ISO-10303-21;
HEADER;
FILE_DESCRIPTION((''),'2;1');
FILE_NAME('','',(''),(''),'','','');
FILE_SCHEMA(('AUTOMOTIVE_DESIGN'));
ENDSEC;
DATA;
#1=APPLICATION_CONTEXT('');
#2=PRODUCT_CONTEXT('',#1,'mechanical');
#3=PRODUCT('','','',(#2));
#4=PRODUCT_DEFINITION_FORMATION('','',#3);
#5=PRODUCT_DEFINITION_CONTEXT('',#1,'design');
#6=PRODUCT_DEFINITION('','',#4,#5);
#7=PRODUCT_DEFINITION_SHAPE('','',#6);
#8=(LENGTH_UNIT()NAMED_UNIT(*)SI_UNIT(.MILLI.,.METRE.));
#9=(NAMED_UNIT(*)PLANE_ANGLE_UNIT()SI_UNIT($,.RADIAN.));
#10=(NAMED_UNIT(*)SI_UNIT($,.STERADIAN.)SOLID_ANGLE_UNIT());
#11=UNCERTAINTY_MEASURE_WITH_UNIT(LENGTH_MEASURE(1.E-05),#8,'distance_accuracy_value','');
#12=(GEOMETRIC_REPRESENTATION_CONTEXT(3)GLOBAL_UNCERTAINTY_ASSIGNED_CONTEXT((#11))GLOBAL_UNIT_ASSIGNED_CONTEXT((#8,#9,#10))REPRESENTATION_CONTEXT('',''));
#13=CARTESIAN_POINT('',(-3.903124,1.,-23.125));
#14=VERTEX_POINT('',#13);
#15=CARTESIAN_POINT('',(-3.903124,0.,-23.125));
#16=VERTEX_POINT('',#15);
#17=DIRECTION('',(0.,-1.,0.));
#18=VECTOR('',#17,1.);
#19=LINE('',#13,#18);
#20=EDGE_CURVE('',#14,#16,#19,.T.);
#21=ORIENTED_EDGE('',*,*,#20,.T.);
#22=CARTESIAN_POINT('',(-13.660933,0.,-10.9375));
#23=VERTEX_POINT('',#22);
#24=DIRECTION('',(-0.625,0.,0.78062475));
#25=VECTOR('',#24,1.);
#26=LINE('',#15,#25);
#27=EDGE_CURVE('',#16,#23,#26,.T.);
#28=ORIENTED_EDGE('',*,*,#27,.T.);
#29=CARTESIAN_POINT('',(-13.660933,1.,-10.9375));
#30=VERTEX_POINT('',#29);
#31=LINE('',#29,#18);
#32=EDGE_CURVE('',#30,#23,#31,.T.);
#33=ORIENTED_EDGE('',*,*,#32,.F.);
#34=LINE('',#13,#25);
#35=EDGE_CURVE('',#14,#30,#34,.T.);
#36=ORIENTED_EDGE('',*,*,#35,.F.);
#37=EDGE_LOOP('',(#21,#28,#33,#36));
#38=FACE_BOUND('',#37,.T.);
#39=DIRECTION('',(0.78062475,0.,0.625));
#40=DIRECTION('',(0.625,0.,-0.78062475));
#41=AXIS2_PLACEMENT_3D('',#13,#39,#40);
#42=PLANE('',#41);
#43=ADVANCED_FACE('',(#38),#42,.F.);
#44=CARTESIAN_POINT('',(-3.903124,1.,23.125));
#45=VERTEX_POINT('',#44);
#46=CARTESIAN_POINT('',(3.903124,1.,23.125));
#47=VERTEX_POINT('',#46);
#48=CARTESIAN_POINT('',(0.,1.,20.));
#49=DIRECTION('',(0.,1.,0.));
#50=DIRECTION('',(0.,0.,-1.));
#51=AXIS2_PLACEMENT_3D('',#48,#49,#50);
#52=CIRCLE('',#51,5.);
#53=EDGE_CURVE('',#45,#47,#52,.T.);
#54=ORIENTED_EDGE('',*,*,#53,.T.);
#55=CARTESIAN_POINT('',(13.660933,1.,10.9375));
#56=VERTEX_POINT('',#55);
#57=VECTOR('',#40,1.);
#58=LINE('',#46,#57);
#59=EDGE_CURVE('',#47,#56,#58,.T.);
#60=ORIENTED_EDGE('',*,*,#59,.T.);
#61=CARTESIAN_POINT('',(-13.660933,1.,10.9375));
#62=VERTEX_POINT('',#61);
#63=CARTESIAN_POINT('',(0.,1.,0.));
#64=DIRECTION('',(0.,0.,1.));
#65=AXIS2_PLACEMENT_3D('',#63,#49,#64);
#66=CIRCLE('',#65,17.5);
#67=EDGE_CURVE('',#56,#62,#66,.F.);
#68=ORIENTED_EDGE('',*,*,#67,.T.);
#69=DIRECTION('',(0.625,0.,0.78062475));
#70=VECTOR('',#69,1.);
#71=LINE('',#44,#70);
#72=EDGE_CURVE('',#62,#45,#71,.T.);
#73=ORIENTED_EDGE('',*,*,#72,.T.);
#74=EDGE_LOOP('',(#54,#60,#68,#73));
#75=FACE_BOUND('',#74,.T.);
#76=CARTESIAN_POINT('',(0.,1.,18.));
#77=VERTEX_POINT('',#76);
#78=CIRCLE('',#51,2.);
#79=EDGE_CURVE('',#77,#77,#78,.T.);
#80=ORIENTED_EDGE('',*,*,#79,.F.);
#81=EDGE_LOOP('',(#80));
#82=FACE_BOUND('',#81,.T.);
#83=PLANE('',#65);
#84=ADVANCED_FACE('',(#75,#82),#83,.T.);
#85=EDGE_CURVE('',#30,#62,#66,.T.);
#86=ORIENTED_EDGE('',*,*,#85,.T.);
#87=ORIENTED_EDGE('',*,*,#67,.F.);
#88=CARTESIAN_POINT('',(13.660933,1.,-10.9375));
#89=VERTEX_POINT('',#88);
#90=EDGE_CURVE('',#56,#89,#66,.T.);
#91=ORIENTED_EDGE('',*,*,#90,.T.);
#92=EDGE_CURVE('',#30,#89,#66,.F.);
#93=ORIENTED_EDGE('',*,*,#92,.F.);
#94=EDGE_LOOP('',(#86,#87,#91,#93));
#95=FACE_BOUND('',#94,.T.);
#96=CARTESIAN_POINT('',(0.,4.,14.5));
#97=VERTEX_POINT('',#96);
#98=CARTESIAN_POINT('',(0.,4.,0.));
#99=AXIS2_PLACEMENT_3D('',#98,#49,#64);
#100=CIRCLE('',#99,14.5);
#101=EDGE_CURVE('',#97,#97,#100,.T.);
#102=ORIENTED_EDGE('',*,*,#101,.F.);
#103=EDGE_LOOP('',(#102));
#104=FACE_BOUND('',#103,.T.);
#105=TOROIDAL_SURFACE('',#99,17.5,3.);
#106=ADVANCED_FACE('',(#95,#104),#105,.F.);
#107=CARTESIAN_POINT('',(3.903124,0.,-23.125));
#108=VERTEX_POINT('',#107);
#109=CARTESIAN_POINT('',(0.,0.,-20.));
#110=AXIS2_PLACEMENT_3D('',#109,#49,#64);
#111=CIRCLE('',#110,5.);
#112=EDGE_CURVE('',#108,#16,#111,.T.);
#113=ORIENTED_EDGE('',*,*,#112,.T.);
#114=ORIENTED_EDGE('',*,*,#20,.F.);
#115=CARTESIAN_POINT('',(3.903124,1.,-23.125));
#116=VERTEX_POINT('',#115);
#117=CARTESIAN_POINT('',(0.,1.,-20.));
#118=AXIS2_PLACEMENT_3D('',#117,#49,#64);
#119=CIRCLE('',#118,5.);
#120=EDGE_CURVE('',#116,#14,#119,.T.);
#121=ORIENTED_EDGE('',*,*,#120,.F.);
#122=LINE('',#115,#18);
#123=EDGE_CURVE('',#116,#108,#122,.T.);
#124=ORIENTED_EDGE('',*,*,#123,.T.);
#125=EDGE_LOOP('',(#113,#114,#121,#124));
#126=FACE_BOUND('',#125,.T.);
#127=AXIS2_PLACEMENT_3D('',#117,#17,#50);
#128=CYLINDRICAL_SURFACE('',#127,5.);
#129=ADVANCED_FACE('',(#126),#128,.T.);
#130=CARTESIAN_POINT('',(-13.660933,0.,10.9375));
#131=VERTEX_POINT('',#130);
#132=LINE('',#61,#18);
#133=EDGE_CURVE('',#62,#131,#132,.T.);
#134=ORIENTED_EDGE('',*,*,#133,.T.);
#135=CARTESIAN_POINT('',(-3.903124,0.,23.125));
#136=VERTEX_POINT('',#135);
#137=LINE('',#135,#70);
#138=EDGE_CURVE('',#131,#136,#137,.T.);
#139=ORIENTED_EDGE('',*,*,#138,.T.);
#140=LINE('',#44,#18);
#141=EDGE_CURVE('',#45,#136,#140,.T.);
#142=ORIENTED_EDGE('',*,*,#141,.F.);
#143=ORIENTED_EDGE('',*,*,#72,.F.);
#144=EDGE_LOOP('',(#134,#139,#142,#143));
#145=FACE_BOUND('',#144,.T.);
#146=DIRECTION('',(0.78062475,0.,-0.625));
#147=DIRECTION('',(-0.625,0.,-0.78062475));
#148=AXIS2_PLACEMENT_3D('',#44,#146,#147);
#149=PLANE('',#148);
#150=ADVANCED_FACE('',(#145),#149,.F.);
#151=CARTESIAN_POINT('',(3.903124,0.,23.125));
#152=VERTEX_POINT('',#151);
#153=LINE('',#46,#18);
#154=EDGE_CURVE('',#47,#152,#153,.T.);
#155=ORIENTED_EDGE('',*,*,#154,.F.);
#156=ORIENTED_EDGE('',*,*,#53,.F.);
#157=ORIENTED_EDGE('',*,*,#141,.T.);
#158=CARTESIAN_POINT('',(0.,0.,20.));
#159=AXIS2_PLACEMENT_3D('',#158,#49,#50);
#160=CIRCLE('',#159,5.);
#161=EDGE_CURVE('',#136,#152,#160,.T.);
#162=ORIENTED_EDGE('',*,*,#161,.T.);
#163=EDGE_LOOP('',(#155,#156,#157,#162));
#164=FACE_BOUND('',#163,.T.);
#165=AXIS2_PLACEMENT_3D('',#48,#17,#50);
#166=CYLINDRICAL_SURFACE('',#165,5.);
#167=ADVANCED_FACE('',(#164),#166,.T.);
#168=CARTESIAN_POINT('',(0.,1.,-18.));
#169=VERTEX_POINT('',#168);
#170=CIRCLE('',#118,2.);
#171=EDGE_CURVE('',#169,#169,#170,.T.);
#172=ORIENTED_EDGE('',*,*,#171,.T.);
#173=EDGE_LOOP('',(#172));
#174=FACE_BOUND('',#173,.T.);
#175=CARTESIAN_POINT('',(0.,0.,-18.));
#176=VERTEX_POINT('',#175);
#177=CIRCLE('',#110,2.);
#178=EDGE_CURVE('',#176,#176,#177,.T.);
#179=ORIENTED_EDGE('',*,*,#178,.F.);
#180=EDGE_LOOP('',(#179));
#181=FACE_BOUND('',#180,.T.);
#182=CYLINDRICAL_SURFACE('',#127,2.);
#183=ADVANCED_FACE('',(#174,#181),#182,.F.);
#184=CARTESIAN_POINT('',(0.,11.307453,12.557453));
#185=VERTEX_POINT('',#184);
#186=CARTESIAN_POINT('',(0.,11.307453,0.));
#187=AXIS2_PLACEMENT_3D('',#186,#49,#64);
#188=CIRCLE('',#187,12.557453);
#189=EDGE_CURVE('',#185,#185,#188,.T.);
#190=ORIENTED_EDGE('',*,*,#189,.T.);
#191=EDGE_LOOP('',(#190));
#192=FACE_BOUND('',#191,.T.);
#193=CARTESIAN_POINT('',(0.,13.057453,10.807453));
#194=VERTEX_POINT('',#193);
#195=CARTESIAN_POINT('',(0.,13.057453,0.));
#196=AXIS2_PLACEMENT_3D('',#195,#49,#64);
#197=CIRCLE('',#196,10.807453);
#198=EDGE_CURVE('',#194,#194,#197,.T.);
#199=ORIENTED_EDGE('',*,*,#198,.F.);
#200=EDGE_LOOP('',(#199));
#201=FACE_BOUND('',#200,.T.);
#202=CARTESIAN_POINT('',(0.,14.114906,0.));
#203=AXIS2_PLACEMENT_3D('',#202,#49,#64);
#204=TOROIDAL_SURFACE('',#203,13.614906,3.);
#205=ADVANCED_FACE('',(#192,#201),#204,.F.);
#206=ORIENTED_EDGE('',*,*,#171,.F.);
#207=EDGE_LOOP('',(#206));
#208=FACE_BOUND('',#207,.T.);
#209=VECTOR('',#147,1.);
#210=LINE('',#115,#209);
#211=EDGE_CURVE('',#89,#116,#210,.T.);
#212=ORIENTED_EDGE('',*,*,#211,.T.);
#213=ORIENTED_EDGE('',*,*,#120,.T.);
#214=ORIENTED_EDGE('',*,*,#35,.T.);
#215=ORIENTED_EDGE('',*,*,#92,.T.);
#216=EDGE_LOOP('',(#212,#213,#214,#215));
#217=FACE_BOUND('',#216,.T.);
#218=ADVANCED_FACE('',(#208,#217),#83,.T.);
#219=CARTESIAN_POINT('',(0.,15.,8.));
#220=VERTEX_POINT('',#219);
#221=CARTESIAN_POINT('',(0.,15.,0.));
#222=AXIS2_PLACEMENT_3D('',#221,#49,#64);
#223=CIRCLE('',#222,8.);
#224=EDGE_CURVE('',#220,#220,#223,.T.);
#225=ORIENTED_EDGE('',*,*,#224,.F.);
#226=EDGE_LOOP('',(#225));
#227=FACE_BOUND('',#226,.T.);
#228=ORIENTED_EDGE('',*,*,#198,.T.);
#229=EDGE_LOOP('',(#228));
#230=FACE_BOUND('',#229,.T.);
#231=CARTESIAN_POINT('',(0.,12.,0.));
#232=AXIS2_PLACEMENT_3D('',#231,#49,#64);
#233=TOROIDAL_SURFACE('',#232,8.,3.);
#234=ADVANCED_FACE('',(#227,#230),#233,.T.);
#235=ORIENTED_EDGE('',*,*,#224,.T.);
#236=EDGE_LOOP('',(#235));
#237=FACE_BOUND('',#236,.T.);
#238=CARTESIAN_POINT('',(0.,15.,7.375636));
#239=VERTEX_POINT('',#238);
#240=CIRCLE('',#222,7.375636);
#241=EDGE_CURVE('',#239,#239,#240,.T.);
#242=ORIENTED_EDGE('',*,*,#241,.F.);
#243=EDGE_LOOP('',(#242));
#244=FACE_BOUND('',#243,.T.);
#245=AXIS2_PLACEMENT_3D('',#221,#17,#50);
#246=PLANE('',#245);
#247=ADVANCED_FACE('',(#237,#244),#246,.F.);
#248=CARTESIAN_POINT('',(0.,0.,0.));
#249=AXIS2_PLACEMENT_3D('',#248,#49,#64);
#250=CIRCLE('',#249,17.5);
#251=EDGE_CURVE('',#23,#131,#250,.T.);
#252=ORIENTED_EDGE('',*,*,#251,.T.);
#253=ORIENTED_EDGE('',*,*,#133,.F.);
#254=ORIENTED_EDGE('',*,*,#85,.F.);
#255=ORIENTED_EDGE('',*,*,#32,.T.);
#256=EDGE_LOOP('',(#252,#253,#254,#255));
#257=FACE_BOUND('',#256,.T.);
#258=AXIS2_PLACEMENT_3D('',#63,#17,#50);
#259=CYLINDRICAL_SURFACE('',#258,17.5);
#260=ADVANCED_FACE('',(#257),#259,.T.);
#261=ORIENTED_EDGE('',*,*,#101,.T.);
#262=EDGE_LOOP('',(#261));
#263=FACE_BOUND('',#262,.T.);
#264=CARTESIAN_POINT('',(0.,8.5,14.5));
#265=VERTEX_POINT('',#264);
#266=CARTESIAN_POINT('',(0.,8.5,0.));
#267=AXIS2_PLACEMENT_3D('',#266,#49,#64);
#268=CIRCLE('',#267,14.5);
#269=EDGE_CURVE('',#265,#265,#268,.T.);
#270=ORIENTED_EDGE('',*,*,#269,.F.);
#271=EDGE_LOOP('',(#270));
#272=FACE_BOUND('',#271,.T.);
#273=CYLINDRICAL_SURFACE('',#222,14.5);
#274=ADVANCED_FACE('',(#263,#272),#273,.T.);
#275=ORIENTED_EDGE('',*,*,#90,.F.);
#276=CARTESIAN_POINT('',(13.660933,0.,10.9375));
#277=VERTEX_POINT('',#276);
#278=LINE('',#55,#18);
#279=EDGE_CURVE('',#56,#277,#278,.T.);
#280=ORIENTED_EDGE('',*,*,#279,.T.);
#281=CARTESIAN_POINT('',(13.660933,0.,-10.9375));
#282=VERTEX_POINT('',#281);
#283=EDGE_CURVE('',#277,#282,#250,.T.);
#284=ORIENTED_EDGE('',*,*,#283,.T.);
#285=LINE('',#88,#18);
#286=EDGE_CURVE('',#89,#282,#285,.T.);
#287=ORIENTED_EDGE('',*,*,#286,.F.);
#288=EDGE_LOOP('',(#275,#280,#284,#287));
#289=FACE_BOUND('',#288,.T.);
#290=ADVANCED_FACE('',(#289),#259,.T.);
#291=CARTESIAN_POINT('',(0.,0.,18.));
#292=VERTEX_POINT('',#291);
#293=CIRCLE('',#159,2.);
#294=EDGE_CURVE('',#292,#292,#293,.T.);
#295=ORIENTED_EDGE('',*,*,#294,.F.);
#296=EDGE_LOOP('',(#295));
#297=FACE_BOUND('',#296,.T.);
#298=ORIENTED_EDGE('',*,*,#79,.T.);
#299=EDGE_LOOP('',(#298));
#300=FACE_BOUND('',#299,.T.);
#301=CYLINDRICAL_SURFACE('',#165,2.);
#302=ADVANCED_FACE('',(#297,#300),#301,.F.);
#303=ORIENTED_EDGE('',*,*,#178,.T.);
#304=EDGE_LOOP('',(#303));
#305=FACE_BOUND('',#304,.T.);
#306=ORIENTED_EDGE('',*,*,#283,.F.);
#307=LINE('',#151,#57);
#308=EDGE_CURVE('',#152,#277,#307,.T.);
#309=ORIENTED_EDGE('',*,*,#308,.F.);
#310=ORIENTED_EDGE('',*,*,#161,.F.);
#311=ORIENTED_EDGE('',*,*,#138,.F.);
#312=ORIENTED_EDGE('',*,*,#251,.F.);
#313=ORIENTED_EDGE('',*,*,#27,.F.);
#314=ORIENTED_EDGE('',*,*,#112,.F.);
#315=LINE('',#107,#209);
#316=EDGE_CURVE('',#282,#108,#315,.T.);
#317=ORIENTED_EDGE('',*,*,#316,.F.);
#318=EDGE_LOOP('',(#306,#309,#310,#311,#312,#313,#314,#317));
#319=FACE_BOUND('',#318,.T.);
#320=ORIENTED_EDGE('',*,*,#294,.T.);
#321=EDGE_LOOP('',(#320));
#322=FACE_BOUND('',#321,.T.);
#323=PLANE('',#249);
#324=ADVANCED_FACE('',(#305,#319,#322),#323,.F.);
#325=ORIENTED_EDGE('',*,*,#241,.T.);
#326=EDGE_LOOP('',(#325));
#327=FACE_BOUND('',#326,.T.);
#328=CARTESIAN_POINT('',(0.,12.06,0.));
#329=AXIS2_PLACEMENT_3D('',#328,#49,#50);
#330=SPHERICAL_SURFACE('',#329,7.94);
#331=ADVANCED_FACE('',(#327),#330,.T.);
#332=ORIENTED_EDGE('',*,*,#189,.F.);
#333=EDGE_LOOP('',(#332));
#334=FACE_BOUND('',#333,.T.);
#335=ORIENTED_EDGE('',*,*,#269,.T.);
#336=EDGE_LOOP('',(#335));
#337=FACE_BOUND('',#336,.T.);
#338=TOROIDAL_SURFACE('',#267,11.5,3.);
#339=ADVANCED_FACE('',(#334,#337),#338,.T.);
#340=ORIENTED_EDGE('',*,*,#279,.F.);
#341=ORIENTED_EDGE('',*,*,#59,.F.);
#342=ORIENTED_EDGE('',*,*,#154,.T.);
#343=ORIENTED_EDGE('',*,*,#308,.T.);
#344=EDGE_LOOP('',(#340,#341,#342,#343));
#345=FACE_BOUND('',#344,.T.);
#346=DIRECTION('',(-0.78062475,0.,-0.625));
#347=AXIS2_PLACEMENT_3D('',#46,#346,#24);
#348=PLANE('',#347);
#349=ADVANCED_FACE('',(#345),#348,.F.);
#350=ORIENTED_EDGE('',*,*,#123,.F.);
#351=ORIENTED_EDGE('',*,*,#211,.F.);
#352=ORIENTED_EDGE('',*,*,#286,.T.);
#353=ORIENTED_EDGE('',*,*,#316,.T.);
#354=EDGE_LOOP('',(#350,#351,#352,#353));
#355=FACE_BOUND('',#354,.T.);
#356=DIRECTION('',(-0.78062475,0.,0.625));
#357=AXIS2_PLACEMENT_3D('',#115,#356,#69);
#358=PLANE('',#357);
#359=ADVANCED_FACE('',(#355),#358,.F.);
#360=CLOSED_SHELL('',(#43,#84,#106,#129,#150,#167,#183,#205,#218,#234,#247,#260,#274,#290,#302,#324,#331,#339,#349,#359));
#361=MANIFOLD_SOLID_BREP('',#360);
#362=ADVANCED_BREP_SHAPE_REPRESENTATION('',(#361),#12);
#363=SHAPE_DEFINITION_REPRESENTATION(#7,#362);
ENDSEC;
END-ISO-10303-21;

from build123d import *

# Parameters (mm, degrees)
SKETCH_1_R      = 2
EXTRUDE_1_DEPTH = 1
FILLET_1_R      = 3


with BuildPart() as part:
    # 草图1 → 凸台-拉伸1 (new body)
    with BuildSketch(Plane(origin=(0, 0, 0), x_dir=(1, 0, 0), z_dir=(0, 1, 0))):
        with BuildLine():
            Line((-3.903123749, 23.125), (-13.660933121, 10.9375))
            ThreePointArc((-13.660933121, 10.9375), (-17.5, 0), (-13.660933121, -10.9375))
            Line((-13.660933121, -10.9375), (-3.903123749, -23.125))
            ThreePointArc((-3.903123749, -23.125), (0, -25), (3.903123749, -23.125))
            Line((3.903123749, -23.125), (13.660933121, -10.9375))
            ThreePointArc((13.660933121, -10.9375), (17.5, 0), (13.660933121, 10.9375))
            Line((13.660933121, 10.9375), (3.903123749, 23.125))
            ThreePointArc((3.903123749, 23.125), (0, 25), (-3.903123749, 23.125))
        make_face()
        with Locations(Location((0, 20, 0), (0, 0, 270))):
            Circle(SKETCH_1_R, mode=Mode.SUBTRACT)
        with Locations(Location((0, -20, 0), (0, 0, 90))):
            Circle(SKETCH_1_R, mode=Mode.SUBTRACT)
    extrude(amount=EXTRUDE_1_DEPTH)

    # 草图3 → 旋转2 (revolve)
    with BuildSketch(Plane(origin=(0, 0, 0), x_dir=(0, 0, -1), z_dir=(1, 0, 0))):
        with BuildLine():
            Line((-14.5, 8.5), (-14.5, 1))
            Line((-14.5, 1), (0, 1))
            Line((0, 1), (0, 4.12))
            ThreePointArc((0, 4.12), (-6.572183808, 7.604666118), (-7.375635566, 15))
            Line((-7.375635566, 15), (-8, 15))
            ThreePointArc((-8, 15), (-9.706991606, 14.467018374), (-10.807453104, 13.057453104))
            ThreePointArc((-10.807453104, 13.057453104), (-11.493585865, 11.993585865), (-12.557453104, 11.307453104))
            ThreePointArc((-12.557453104, 11.307453104), (-13.967018374, 10.206991606), (-14.5, 8.5))
        make_face()
        with BuildLine():
            ThreePointArc((-7.375635566, 15), (-6.572183808, 7.604666118), (0, 4.12))
            Line((0, 4.12), (0, 15))
            Line((0, 15), (-7.375635566, 15))
        make_face()
        with BuildLine():
            Line((-7.375635566, 15), (0, 15))
            Line((0, 15), (0, 20))
            ThreePointArc((0, 20), (-4.455333882, 18.632183808), (-7.375635566, 15))
        make_face()
    revolve(axis=Axis((0, 15, 0), (0, -1, 0)))

    # 圆角1
    fillet_1_edges = [part.edges().sort_by_distance(p)[0] for p in [
        (0, 1, -14.5),
    ]]
    fillet(fillet_1_edges, radius=FILLET_1_R - 0.0001)  # a hair under: the kernel refuses the full size


solid = part.part
